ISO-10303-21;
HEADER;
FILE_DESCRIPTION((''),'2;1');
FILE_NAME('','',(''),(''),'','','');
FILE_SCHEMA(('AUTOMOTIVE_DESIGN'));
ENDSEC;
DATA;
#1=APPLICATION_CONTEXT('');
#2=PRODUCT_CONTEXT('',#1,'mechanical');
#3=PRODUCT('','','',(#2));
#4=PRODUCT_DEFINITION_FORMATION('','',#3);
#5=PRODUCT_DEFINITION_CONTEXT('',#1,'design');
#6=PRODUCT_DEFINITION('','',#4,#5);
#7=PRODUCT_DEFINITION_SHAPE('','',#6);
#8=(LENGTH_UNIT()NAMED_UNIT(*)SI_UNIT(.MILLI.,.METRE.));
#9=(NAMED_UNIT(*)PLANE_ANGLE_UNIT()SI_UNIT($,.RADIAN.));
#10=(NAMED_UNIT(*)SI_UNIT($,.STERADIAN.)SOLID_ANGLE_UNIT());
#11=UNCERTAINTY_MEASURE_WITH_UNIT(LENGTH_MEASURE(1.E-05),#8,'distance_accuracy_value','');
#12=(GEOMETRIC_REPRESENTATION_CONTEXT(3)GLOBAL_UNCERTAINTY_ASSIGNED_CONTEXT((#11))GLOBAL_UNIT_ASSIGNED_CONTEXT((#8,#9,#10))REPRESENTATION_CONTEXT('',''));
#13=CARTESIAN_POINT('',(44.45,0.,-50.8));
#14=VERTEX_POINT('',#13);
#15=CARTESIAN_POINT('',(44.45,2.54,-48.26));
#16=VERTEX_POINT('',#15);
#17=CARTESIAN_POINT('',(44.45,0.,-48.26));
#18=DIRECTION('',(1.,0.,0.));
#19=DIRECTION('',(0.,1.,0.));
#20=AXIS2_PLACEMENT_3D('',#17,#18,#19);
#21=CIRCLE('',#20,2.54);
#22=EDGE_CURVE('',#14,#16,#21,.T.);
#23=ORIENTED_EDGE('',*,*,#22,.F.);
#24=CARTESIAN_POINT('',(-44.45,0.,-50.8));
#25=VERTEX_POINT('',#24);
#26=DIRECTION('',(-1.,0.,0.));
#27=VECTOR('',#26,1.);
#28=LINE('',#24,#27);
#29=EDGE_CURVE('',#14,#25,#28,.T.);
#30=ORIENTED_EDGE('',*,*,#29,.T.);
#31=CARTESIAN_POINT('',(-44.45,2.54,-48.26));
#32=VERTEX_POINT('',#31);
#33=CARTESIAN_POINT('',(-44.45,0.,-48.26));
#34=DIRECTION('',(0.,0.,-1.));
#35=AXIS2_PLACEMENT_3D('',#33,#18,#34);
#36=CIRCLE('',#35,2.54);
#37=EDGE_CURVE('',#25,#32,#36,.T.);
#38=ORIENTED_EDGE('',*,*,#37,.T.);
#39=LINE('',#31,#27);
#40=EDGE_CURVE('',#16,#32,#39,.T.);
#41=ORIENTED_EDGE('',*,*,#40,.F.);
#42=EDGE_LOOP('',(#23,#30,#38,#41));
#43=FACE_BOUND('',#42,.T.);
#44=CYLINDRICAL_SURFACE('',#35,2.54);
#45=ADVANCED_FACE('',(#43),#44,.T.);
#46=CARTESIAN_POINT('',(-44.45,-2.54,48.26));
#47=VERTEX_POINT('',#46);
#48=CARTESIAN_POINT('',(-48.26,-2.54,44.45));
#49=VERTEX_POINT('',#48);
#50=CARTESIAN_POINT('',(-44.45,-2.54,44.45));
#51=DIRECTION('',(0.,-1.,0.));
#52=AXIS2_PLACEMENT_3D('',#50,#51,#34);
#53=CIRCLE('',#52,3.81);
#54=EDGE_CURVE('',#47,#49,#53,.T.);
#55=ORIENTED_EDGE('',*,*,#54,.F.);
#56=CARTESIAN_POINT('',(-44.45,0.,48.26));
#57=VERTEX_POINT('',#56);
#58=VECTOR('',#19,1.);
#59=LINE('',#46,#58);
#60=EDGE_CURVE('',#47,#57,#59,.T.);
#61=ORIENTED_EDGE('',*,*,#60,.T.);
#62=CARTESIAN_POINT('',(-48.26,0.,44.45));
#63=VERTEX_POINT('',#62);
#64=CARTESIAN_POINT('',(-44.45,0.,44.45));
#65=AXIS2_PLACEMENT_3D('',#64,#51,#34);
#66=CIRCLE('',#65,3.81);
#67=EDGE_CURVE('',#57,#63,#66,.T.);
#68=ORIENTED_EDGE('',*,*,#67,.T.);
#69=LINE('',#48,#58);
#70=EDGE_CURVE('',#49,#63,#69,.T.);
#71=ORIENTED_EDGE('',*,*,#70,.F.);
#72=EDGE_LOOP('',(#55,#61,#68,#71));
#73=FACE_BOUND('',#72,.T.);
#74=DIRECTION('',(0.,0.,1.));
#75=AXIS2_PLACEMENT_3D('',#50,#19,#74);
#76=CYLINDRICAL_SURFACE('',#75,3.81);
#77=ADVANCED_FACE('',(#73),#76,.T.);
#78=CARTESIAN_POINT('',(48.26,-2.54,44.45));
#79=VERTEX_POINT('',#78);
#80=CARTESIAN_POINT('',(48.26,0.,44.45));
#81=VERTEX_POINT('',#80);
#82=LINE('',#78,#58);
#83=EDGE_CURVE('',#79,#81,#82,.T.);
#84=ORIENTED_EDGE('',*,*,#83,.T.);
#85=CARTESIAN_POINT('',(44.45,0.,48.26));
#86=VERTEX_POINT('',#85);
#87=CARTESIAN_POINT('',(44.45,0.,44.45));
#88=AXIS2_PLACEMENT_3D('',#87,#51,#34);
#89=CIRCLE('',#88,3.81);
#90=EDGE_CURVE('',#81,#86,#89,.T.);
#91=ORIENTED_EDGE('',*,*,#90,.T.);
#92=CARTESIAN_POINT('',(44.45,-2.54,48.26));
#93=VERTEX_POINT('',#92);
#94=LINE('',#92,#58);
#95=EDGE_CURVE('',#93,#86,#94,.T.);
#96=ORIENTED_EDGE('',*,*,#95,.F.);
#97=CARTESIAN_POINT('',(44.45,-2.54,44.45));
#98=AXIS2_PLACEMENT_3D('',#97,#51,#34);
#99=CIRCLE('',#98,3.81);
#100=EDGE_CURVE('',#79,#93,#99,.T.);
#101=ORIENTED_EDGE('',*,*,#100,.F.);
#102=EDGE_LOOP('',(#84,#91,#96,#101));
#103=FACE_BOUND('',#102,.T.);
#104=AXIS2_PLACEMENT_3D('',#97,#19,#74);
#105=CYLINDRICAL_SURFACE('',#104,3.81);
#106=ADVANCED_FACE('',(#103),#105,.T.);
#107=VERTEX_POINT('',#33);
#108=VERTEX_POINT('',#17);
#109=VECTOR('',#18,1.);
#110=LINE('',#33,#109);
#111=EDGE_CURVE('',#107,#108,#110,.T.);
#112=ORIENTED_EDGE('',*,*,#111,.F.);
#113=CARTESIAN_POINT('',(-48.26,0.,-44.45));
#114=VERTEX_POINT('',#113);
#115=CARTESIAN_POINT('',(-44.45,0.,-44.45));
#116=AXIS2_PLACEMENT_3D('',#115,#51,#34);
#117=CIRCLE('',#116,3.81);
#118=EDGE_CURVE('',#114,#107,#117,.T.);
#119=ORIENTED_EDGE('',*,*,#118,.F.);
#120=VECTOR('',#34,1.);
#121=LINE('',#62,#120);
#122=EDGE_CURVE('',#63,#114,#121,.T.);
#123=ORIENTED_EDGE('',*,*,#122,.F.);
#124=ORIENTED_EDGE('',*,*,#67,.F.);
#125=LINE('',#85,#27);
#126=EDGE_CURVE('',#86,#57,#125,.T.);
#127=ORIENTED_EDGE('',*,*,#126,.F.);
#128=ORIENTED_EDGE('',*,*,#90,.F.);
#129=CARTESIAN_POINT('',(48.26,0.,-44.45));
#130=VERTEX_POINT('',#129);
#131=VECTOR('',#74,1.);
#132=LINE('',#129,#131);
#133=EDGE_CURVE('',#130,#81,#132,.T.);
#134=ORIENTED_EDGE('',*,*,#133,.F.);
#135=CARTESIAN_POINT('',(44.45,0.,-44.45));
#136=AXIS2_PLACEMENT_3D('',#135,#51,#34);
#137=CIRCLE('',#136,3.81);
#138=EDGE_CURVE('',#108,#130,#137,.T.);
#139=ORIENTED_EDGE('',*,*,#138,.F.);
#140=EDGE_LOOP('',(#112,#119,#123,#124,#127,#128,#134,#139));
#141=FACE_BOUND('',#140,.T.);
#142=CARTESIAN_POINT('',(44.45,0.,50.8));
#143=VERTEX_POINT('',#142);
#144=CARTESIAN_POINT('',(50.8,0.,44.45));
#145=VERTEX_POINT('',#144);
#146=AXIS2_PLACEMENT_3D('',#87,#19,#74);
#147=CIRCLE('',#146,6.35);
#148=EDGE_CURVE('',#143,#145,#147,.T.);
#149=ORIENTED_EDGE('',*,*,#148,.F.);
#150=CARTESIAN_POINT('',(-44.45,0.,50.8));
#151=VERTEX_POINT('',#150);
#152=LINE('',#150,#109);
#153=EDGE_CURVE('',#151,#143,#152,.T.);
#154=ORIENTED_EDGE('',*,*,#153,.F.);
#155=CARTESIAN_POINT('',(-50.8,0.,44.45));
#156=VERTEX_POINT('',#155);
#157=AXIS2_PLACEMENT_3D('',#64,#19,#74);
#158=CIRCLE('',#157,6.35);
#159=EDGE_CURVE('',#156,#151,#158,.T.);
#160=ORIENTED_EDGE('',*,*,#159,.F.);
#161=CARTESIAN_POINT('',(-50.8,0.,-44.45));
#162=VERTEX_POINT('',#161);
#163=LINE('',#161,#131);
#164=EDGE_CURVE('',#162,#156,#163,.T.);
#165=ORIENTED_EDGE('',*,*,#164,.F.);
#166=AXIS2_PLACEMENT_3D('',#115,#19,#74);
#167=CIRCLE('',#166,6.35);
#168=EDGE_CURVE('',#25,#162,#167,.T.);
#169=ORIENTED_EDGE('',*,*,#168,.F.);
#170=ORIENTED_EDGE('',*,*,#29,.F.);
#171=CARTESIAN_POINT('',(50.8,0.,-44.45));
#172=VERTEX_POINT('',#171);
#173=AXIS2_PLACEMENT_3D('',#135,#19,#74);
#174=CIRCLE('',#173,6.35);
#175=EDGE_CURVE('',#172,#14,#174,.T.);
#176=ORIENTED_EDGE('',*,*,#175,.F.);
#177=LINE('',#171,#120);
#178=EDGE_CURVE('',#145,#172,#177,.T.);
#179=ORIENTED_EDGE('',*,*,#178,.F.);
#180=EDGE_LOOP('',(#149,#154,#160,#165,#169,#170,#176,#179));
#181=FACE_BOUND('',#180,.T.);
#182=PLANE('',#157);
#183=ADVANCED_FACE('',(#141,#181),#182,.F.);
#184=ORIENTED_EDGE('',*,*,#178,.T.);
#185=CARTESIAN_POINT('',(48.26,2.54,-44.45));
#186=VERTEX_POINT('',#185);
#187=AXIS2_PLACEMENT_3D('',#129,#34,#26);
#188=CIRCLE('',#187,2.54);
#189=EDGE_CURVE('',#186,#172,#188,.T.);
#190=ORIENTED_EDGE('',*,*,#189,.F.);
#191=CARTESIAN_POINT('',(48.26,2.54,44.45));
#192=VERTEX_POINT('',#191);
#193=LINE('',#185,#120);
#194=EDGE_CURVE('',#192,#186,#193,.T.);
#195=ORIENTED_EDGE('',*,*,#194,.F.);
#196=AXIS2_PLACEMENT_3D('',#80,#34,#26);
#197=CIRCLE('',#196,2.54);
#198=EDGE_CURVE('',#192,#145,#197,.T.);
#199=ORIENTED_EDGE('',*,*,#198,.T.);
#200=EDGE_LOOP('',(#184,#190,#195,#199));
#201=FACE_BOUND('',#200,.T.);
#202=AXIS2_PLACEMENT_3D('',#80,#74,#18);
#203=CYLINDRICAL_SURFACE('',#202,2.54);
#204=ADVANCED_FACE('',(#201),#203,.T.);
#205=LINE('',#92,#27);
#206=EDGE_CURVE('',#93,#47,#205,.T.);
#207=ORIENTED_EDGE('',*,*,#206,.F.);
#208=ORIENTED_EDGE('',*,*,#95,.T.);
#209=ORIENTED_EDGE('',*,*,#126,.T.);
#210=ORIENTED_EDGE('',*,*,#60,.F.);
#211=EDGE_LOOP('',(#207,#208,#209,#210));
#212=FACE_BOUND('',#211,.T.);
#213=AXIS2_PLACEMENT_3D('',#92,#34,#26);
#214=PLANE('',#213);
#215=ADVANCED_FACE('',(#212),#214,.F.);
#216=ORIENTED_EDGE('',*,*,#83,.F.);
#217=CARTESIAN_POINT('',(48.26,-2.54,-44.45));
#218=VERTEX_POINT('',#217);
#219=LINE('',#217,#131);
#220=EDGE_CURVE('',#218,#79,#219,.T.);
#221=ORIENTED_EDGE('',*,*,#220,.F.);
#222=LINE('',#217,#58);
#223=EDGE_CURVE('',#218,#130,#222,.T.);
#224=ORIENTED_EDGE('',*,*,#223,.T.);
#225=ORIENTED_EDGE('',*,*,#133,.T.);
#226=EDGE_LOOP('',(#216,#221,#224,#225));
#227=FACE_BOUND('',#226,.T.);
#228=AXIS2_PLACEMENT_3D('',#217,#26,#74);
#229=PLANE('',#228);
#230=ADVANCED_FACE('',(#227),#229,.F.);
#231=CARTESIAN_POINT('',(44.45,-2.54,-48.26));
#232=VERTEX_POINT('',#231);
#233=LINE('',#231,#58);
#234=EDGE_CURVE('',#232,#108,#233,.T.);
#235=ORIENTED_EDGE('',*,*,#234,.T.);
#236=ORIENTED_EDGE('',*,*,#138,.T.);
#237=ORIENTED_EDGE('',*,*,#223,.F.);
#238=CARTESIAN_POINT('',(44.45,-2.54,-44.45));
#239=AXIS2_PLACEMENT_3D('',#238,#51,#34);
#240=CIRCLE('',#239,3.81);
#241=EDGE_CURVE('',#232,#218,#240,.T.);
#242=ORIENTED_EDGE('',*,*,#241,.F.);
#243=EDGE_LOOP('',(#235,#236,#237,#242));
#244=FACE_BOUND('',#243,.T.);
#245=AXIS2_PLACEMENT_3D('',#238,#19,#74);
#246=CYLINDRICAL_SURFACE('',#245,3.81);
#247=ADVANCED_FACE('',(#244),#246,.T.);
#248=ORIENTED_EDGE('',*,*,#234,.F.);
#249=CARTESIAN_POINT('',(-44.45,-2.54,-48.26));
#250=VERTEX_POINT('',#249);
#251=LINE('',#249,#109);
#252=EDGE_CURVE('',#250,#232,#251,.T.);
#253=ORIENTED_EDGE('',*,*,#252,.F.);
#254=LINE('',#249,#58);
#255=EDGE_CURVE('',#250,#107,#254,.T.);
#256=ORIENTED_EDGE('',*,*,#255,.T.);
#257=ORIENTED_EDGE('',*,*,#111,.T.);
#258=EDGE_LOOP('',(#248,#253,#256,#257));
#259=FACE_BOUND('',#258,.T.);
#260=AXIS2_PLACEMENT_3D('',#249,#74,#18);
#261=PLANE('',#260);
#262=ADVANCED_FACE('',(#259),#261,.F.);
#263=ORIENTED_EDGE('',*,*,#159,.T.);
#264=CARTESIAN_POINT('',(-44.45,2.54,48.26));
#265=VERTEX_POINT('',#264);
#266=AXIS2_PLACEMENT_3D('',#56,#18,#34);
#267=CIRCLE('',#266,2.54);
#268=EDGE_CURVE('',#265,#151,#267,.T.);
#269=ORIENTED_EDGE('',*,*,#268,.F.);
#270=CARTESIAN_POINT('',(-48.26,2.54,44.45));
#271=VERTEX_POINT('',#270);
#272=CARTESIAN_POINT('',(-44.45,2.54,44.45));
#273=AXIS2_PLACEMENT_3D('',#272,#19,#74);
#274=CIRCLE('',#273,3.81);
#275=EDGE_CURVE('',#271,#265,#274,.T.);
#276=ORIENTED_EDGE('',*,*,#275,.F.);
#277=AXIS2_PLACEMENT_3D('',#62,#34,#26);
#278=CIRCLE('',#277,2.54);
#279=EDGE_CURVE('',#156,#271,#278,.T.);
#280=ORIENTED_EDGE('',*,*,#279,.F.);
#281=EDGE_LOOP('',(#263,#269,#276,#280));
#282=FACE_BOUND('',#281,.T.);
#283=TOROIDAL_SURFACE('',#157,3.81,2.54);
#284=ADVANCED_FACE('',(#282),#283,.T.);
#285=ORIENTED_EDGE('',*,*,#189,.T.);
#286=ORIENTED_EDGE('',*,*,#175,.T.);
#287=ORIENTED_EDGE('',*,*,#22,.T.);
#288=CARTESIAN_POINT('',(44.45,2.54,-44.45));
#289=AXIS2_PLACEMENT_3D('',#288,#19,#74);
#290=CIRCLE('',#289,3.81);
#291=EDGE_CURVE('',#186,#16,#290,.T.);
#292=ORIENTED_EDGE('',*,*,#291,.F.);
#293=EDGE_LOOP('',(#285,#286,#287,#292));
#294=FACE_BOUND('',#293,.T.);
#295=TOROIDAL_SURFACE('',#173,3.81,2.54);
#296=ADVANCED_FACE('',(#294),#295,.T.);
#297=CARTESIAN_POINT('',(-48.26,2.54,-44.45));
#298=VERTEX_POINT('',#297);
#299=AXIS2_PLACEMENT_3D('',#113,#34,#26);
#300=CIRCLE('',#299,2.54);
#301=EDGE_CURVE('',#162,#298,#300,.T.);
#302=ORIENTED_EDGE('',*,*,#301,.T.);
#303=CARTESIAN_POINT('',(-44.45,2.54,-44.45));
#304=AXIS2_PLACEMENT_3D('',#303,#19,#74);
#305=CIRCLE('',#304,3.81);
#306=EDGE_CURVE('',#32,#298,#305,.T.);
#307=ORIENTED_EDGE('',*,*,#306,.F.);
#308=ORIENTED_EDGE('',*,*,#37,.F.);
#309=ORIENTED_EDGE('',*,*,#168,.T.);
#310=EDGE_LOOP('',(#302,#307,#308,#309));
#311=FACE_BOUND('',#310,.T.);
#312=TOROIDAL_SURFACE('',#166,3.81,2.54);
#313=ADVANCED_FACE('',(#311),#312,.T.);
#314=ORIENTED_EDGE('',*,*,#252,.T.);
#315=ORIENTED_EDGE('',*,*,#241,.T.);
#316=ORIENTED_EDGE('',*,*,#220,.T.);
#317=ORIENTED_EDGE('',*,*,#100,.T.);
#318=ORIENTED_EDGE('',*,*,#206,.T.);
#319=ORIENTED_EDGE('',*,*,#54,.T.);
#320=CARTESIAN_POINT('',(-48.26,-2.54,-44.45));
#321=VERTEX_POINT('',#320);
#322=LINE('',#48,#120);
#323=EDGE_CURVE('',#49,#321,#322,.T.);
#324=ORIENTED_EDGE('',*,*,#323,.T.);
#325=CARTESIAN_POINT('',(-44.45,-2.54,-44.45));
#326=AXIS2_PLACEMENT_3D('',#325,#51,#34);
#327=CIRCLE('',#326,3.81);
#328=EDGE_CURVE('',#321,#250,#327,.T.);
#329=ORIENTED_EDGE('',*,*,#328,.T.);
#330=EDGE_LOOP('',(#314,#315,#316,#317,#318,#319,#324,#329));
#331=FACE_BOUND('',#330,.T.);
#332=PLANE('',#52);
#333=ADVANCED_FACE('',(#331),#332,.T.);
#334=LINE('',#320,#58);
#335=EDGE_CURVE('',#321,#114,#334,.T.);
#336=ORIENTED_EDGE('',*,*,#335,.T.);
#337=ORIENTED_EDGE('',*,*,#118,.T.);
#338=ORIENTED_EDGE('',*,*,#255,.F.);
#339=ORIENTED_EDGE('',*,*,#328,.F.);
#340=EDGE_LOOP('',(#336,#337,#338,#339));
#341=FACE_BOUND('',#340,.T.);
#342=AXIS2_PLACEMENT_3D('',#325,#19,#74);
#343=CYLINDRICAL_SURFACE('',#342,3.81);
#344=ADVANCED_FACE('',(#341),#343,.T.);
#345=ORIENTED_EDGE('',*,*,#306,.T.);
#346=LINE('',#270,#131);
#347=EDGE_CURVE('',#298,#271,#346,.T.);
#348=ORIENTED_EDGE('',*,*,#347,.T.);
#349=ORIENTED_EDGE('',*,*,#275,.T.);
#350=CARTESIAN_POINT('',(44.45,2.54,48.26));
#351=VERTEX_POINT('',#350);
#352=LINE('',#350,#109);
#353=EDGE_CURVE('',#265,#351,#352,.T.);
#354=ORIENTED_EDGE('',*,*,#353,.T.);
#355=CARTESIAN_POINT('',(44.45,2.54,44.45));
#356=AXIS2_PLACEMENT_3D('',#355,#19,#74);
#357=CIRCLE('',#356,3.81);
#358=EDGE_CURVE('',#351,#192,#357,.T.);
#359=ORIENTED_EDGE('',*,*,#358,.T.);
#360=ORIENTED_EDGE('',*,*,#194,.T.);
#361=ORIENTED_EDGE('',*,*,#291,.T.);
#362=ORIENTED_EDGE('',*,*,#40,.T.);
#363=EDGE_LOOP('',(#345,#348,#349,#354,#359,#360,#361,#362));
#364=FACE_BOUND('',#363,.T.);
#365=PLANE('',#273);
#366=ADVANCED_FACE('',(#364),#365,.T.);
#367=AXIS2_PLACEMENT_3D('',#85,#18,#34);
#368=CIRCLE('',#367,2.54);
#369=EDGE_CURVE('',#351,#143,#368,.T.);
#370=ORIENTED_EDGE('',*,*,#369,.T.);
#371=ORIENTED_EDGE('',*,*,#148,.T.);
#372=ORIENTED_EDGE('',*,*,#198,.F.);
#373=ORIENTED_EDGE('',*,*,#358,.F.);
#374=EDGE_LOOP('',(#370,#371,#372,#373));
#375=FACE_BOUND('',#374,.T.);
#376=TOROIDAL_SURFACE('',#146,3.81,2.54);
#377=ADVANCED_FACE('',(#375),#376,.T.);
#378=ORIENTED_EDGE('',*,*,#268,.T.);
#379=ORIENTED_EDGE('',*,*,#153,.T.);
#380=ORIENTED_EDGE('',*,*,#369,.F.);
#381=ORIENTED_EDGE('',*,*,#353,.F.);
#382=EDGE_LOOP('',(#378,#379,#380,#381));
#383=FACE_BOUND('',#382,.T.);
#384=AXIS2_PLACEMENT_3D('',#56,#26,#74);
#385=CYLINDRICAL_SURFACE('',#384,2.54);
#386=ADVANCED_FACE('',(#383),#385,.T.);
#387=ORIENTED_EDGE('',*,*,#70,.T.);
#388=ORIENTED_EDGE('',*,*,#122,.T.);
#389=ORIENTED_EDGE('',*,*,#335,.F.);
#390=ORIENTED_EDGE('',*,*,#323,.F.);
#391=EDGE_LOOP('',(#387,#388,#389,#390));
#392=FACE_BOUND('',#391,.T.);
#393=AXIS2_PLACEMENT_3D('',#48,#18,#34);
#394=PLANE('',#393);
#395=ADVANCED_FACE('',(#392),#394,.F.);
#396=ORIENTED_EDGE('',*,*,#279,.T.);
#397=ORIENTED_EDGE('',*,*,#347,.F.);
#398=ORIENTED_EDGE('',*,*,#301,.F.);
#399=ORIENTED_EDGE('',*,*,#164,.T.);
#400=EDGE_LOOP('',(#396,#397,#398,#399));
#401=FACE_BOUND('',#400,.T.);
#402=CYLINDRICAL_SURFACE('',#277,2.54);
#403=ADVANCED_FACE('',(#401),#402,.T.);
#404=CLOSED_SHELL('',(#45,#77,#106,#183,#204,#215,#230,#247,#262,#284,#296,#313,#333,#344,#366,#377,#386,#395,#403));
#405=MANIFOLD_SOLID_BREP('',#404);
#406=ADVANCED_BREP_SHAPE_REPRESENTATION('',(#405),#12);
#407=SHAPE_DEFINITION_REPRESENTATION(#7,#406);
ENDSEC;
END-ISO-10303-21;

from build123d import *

# Parameters (mm, degrees)
BOSS_EXTRUDE1_DEPTH = 2.54
BOSS_EXTRUDE2_DEPTH = 2.54
FILLET1_R           = 2.54


with BuildPart() as part:
    # Sketch1 → Boss-Extrude1 (new body)
    with BuildSketch(Plane(origin=(0, 0, 0), x_dir=(1, 0, 0), z_dir=(0, 1, 0))):
        with BuildLine():
            Line((-44.45, 50.8), (44.45, 50.8))
            ThreePointArc((44.45, 50.8), (48.940128061, 48.940128061), (50.8, 44.45))
            Line((50.8, 44.45), (50.8, -44.45))
            ThreePointArc((50.8, -44.45), (48.940128061, -48.940128061), (44.45, -50.8))
            Line((44.45, -50.8), (-44.45, -50.8))
            ThreePointArc((-44.45, -50.8), (-48.940128061, -48.940128061), (-50.8, -44.45))
            Line((-50.8, -44.45), (-50.8, 44.45))
            ThreePointArc((-50.8, 44.45), (-48.940128061, 48.940128061), (-44.45, 50.8))
        make_face()
    extrude(amount=BOSS_EXTRUDE1_DEPTH)

    # Sketch2 → Boss-Extrude2 (add)
    with BuildSketch(Plane.XZ):
        with BuildLine():
            Line((-48.26, 44.45), (-48.26, -44.45))
            ThreePointArc((-48.26, -44.45), (-47.144076836, -47.144076836), (-44.45, -48.26))
            Line((-44.45, -48.26), (44.45, -48.26))
            ThreePointArc((44.45, -48.26), (47.144076836, -47.144076836), (48.26, -44.45))
            Line((48.26, -44.45), (48.26, 44.45))
            ThreePointArc((48.26, 44.45), (47.144076836, 47.144076836), (44.45, 48.26))
            Line((44.45, 48.26), (-44.45, 48.26))
            ThreePointArc((-44.45, 48.26), (-47.144076836, 47.144076836), (-48.26, 44.45))
        make_face()
    extrude(amount=BOSS_EXTRUDE2_DEPTH)

    # Fillet1
    fillet1_edges = [part.edges().sort_by_distance(p)[0] for p in [
        (48.940128061, 2.54, -48.940128061),
        (50.8, 2.54, 0),
        (48.940128061, 2.54, 48.940128061),
        (0, 2.54, 50.8),
        (-48.940128061, 2.54, 48.940128061),
        (-50.8, 2.54, 0),
        (-48.940128061, 2.54, -48.940128061),
        (0, 2.54, -50.8),
    ]]
    fillet(fillet1_edges, radius=FILLET1_R - 0.0001)  # a hair under: the kernel refuses the full size


solid = part.part
